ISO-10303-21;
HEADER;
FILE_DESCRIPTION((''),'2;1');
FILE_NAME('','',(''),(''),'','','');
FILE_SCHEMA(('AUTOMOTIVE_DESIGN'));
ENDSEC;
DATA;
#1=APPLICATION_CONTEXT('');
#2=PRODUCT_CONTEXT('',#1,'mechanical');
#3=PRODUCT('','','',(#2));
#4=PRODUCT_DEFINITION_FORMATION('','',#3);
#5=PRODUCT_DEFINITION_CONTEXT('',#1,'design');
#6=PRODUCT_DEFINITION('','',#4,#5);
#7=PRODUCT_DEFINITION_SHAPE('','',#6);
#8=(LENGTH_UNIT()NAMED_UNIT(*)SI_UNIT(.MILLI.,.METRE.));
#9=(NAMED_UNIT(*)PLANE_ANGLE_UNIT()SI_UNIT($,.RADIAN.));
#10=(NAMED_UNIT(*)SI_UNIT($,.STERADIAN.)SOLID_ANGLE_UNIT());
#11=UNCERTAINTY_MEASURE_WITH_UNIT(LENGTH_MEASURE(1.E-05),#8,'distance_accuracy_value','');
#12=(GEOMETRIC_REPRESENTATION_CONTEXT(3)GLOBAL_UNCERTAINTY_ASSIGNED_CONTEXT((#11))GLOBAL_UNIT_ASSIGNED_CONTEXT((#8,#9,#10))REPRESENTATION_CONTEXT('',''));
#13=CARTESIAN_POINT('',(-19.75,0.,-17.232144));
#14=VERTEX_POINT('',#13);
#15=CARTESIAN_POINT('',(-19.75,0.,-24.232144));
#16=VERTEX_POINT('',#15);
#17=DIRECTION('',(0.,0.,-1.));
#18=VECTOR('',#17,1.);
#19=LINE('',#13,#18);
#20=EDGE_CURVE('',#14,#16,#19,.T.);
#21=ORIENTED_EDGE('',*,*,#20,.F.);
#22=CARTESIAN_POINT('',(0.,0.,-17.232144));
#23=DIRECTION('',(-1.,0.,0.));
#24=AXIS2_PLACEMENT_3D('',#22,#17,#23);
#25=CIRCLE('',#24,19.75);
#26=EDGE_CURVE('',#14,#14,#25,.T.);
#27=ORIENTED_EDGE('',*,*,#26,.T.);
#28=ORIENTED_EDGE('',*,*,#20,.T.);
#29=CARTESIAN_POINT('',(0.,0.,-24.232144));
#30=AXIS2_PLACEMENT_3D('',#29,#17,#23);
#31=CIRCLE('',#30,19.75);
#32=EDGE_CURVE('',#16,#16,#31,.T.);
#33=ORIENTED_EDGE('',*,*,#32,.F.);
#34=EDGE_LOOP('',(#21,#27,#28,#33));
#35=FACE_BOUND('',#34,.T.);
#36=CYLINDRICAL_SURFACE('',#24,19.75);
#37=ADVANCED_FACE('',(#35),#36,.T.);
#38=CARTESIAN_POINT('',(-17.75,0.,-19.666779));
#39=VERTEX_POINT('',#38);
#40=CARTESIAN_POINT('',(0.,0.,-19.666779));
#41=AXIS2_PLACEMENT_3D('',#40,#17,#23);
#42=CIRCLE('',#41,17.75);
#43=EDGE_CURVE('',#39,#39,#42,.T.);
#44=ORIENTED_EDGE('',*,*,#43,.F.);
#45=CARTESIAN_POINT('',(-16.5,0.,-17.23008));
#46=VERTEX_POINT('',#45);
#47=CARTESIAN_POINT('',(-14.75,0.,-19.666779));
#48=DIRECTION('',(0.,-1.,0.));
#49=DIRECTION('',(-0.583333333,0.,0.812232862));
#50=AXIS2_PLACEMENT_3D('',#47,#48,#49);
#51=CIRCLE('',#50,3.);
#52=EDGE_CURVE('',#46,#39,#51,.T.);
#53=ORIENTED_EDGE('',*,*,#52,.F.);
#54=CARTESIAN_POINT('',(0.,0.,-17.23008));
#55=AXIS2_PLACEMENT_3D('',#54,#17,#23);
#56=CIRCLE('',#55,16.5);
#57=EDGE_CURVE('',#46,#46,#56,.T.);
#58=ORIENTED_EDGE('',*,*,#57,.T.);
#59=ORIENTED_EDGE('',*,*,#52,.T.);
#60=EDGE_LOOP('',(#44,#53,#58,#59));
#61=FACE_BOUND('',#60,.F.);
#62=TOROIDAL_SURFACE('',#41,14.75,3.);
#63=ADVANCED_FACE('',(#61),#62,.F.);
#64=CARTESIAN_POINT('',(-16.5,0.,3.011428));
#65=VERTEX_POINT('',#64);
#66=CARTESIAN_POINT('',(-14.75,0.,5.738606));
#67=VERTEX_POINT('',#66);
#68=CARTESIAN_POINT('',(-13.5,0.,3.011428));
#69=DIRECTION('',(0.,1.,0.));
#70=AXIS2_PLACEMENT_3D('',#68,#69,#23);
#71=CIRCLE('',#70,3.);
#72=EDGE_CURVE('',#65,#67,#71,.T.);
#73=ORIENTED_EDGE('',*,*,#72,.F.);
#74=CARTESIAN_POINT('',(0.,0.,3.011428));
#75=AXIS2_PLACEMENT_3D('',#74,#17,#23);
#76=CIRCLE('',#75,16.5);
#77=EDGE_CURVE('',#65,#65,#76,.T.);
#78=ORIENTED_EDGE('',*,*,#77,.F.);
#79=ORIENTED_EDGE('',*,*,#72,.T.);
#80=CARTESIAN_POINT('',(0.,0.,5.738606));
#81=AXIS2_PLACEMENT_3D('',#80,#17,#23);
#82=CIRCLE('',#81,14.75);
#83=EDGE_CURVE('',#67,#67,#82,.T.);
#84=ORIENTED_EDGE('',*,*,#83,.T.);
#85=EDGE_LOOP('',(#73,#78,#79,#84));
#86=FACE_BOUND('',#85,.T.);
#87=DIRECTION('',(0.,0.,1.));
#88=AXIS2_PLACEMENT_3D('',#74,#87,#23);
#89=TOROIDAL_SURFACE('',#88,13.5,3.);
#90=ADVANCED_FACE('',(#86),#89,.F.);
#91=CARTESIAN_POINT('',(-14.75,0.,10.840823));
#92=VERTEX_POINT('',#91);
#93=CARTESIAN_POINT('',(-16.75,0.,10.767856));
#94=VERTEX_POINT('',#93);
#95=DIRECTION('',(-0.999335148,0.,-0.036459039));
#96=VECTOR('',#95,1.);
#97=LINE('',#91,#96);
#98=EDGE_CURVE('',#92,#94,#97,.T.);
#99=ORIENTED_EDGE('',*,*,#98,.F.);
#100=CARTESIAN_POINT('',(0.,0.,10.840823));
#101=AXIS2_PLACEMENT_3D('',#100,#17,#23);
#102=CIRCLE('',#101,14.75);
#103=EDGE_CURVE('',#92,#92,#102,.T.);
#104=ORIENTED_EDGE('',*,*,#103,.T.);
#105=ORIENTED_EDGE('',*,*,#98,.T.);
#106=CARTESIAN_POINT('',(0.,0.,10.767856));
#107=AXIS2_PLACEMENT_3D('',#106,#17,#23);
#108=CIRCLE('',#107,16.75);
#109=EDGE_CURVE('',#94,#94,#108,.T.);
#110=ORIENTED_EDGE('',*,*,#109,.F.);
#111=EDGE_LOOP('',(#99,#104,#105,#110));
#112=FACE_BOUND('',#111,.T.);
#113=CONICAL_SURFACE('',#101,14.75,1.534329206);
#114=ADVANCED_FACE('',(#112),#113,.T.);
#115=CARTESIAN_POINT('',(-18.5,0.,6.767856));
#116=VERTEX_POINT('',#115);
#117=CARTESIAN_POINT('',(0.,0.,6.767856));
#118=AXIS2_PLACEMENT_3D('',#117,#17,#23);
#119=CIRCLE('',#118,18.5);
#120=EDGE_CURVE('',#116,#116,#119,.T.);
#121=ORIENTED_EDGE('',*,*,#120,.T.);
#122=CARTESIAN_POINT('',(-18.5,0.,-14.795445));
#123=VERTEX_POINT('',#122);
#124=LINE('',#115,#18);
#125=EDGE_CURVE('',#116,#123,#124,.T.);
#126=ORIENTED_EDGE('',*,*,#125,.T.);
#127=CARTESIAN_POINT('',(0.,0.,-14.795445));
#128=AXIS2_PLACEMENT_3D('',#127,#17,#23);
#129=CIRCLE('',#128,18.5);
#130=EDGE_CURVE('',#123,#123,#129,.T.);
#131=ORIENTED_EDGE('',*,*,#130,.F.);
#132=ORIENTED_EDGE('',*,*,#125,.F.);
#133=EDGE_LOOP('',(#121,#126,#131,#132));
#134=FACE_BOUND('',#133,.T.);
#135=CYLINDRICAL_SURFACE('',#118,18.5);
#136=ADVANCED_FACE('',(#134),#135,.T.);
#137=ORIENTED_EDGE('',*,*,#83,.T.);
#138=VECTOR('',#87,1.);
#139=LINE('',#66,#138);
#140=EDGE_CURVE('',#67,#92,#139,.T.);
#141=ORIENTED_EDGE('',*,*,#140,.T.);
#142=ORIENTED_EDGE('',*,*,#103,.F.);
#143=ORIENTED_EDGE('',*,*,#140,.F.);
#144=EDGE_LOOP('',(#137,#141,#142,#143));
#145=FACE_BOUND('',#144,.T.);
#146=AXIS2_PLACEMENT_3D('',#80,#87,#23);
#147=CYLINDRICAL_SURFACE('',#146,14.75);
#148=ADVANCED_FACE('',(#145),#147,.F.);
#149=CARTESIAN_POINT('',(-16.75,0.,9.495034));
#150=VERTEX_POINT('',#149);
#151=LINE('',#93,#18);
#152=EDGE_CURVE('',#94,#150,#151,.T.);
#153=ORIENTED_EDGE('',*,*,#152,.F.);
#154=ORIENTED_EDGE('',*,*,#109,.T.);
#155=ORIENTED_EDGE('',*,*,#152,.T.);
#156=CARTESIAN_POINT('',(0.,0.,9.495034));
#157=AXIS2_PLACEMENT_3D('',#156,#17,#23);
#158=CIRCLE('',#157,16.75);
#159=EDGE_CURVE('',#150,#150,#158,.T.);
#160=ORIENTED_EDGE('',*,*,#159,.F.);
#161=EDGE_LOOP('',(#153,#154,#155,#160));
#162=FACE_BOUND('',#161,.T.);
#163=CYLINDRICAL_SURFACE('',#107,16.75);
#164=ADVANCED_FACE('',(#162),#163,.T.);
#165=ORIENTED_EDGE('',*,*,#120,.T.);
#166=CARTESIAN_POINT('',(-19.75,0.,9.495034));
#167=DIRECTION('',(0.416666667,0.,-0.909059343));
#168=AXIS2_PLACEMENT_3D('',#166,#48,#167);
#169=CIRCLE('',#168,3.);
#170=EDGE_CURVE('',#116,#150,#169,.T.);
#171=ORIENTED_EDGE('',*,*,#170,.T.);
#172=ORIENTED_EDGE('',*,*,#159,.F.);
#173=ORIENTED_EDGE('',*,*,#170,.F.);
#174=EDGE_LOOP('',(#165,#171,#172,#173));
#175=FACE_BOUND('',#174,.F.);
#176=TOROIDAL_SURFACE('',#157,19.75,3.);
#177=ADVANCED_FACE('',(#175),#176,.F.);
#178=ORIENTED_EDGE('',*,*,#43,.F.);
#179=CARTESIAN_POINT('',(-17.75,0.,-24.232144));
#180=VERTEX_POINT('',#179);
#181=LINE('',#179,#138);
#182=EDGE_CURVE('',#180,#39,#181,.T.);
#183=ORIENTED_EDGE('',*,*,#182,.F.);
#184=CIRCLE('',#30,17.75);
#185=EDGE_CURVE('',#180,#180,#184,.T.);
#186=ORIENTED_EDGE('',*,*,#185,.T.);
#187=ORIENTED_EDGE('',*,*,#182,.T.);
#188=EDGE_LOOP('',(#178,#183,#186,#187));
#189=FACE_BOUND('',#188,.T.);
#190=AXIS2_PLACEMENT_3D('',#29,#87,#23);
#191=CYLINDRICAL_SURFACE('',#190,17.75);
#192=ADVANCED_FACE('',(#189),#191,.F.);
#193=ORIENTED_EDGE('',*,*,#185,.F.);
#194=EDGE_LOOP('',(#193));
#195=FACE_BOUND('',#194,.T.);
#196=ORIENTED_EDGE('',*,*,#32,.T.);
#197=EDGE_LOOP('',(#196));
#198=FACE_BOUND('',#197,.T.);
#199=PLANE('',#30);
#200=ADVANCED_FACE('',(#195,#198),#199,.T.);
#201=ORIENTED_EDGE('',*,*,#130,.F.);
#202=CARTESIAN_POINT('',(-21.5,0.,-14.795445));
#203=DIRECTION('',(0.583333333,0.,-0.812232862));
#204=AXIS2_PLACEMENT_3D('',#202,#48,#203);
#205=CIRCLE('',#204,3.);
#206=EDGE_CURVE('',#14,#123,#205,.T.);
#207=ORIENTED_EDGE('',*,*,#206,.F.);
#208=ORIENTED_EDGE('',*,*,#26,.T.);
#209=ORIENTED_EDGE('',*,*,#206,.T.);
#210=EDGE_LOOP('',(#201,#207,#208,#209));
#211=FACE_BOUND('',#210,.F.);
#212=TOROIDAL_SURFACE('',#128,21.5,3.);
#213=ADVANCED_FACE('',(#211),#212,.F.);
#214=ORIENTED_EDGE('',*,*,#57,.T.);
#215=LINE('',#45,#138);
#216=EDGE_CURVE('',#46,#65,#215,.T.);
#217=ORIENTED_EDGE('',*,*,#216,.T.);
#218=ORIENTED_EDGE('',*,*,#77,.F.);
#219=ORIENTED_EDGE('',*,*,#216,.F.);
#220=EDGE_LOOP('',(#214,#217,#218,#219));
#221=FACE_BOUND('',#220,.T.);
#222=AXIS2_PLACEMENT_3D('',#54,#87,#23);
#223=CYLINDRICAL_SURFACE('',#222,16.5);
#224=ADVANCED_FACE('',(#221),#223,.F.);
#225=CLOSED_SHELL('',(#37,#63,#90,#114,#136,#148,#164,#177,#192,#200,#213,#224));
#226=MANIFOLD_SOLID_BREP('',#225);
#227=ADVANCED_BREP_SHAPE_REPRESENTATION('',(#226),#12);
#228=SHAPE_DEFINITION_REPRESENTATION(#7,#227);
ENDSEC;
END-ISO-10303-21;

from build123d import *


# Not quite as in the source:
# - a fillet or chamfer that OpenCascade refuses, or shapes differently, is made with other operations: its cross-section is extruded or revolved along the edge and cut away or added


with BuildPart() as f1:
    # F0 (on Front) → F1 (revolve)
    with BuildSketch(Plane.XZ):
        Polygon((-16.5, 0), (-16.5, 5.7386059155), (-14.75, 5.7386059155), (-14.75, 10.8408229426), (-16.75, 10.7678563523), (-16.75, 6.7678563523), (-18.5, 6.7678563523), (-18.5, -17.2321436477), (-19.75, -17.2321436477), (-19.75, -24.2321436477), (-17.75, -24.2321436477), (-17.75, -17.2321436477), (-16.5, -17.2300804406), align=None)
    revolve(axis=Axis((0, 0, -1.1706372043), (0, 0, -1)))

    # F2: fillet of radius 3 on 4 edges, made by hand

    # F2_s1 → F2_t2 (revolve)
    with BuildSketch(Plane.XZ):
        with BuildLine():
            ThreePointArc((-18.5, 6.7678563523), (-17.2251237654, 7.8748492064), (-16.75, 9.495034381))
            Line((-16.75, 9.495034381), (-16.75, 6.7678563523))
            Line((-16.75, 6.7678563523), (-18.5, 6.7678563523))
        make_face()
    revolve(axis=Axis((0, 0, 6.7678563523), (0, 0, -1)))

    # F2_s3 → F2_t4 (revolve)
    with BuildSketch(Plane.XZ):
        with BuildLine():
            ThreePointArc((-19.75, -17.2321436477), (-18.830730437, -16.1647514552), (-18.5, -14.7954450615))
            Line((-18.5, -14.7954450615), (-18.5, -17.2321436477))
            Line((-18.5, -17.2321436477), (-19.75, -17.2321436477))
        make_face()
    revolve(axis=Axis((0, 0, -17.2321436477), (0, 0, -1)))

    # F2_s5 → F2_t6 (revolve)
    with BuildSketch(Plane.XZ):
        with BuildLine():
            ThreePointArc((-16.5, -17.2300804406), (-17.419269563, -18.2974726331), (-17.75, -19.6667790268))
            Line((-17.75, -19.6667790268), (-17.75, -17.2321436477))
            Line((-17.75, -17.2321436477), (-16.5, -17.2300804406))
        make_face()
    revolve(axis=Axis((0, 0, -17.2321436477), (0, 0, -1)))

    # F2_s7 → F2_t8 (revolve)
    with BuildSketch(Plane.XZ):
        with BuildLine():
            ThreePointArc((-16.5, 3.0114278869), (-16.0248762346, 4.6316130615), (-14.75, 5.7386059155))
            Line((-14.75, 5.7386059155), (-16.5, 5.7386059155))
            Line((-16.5, 5.7386059155), (-16.5, 3.0114278869))
        make_face()
    revolve(axis=Axis((0, 0, 5.7386059155), (0, 0, -1)))


solid = f1.part
